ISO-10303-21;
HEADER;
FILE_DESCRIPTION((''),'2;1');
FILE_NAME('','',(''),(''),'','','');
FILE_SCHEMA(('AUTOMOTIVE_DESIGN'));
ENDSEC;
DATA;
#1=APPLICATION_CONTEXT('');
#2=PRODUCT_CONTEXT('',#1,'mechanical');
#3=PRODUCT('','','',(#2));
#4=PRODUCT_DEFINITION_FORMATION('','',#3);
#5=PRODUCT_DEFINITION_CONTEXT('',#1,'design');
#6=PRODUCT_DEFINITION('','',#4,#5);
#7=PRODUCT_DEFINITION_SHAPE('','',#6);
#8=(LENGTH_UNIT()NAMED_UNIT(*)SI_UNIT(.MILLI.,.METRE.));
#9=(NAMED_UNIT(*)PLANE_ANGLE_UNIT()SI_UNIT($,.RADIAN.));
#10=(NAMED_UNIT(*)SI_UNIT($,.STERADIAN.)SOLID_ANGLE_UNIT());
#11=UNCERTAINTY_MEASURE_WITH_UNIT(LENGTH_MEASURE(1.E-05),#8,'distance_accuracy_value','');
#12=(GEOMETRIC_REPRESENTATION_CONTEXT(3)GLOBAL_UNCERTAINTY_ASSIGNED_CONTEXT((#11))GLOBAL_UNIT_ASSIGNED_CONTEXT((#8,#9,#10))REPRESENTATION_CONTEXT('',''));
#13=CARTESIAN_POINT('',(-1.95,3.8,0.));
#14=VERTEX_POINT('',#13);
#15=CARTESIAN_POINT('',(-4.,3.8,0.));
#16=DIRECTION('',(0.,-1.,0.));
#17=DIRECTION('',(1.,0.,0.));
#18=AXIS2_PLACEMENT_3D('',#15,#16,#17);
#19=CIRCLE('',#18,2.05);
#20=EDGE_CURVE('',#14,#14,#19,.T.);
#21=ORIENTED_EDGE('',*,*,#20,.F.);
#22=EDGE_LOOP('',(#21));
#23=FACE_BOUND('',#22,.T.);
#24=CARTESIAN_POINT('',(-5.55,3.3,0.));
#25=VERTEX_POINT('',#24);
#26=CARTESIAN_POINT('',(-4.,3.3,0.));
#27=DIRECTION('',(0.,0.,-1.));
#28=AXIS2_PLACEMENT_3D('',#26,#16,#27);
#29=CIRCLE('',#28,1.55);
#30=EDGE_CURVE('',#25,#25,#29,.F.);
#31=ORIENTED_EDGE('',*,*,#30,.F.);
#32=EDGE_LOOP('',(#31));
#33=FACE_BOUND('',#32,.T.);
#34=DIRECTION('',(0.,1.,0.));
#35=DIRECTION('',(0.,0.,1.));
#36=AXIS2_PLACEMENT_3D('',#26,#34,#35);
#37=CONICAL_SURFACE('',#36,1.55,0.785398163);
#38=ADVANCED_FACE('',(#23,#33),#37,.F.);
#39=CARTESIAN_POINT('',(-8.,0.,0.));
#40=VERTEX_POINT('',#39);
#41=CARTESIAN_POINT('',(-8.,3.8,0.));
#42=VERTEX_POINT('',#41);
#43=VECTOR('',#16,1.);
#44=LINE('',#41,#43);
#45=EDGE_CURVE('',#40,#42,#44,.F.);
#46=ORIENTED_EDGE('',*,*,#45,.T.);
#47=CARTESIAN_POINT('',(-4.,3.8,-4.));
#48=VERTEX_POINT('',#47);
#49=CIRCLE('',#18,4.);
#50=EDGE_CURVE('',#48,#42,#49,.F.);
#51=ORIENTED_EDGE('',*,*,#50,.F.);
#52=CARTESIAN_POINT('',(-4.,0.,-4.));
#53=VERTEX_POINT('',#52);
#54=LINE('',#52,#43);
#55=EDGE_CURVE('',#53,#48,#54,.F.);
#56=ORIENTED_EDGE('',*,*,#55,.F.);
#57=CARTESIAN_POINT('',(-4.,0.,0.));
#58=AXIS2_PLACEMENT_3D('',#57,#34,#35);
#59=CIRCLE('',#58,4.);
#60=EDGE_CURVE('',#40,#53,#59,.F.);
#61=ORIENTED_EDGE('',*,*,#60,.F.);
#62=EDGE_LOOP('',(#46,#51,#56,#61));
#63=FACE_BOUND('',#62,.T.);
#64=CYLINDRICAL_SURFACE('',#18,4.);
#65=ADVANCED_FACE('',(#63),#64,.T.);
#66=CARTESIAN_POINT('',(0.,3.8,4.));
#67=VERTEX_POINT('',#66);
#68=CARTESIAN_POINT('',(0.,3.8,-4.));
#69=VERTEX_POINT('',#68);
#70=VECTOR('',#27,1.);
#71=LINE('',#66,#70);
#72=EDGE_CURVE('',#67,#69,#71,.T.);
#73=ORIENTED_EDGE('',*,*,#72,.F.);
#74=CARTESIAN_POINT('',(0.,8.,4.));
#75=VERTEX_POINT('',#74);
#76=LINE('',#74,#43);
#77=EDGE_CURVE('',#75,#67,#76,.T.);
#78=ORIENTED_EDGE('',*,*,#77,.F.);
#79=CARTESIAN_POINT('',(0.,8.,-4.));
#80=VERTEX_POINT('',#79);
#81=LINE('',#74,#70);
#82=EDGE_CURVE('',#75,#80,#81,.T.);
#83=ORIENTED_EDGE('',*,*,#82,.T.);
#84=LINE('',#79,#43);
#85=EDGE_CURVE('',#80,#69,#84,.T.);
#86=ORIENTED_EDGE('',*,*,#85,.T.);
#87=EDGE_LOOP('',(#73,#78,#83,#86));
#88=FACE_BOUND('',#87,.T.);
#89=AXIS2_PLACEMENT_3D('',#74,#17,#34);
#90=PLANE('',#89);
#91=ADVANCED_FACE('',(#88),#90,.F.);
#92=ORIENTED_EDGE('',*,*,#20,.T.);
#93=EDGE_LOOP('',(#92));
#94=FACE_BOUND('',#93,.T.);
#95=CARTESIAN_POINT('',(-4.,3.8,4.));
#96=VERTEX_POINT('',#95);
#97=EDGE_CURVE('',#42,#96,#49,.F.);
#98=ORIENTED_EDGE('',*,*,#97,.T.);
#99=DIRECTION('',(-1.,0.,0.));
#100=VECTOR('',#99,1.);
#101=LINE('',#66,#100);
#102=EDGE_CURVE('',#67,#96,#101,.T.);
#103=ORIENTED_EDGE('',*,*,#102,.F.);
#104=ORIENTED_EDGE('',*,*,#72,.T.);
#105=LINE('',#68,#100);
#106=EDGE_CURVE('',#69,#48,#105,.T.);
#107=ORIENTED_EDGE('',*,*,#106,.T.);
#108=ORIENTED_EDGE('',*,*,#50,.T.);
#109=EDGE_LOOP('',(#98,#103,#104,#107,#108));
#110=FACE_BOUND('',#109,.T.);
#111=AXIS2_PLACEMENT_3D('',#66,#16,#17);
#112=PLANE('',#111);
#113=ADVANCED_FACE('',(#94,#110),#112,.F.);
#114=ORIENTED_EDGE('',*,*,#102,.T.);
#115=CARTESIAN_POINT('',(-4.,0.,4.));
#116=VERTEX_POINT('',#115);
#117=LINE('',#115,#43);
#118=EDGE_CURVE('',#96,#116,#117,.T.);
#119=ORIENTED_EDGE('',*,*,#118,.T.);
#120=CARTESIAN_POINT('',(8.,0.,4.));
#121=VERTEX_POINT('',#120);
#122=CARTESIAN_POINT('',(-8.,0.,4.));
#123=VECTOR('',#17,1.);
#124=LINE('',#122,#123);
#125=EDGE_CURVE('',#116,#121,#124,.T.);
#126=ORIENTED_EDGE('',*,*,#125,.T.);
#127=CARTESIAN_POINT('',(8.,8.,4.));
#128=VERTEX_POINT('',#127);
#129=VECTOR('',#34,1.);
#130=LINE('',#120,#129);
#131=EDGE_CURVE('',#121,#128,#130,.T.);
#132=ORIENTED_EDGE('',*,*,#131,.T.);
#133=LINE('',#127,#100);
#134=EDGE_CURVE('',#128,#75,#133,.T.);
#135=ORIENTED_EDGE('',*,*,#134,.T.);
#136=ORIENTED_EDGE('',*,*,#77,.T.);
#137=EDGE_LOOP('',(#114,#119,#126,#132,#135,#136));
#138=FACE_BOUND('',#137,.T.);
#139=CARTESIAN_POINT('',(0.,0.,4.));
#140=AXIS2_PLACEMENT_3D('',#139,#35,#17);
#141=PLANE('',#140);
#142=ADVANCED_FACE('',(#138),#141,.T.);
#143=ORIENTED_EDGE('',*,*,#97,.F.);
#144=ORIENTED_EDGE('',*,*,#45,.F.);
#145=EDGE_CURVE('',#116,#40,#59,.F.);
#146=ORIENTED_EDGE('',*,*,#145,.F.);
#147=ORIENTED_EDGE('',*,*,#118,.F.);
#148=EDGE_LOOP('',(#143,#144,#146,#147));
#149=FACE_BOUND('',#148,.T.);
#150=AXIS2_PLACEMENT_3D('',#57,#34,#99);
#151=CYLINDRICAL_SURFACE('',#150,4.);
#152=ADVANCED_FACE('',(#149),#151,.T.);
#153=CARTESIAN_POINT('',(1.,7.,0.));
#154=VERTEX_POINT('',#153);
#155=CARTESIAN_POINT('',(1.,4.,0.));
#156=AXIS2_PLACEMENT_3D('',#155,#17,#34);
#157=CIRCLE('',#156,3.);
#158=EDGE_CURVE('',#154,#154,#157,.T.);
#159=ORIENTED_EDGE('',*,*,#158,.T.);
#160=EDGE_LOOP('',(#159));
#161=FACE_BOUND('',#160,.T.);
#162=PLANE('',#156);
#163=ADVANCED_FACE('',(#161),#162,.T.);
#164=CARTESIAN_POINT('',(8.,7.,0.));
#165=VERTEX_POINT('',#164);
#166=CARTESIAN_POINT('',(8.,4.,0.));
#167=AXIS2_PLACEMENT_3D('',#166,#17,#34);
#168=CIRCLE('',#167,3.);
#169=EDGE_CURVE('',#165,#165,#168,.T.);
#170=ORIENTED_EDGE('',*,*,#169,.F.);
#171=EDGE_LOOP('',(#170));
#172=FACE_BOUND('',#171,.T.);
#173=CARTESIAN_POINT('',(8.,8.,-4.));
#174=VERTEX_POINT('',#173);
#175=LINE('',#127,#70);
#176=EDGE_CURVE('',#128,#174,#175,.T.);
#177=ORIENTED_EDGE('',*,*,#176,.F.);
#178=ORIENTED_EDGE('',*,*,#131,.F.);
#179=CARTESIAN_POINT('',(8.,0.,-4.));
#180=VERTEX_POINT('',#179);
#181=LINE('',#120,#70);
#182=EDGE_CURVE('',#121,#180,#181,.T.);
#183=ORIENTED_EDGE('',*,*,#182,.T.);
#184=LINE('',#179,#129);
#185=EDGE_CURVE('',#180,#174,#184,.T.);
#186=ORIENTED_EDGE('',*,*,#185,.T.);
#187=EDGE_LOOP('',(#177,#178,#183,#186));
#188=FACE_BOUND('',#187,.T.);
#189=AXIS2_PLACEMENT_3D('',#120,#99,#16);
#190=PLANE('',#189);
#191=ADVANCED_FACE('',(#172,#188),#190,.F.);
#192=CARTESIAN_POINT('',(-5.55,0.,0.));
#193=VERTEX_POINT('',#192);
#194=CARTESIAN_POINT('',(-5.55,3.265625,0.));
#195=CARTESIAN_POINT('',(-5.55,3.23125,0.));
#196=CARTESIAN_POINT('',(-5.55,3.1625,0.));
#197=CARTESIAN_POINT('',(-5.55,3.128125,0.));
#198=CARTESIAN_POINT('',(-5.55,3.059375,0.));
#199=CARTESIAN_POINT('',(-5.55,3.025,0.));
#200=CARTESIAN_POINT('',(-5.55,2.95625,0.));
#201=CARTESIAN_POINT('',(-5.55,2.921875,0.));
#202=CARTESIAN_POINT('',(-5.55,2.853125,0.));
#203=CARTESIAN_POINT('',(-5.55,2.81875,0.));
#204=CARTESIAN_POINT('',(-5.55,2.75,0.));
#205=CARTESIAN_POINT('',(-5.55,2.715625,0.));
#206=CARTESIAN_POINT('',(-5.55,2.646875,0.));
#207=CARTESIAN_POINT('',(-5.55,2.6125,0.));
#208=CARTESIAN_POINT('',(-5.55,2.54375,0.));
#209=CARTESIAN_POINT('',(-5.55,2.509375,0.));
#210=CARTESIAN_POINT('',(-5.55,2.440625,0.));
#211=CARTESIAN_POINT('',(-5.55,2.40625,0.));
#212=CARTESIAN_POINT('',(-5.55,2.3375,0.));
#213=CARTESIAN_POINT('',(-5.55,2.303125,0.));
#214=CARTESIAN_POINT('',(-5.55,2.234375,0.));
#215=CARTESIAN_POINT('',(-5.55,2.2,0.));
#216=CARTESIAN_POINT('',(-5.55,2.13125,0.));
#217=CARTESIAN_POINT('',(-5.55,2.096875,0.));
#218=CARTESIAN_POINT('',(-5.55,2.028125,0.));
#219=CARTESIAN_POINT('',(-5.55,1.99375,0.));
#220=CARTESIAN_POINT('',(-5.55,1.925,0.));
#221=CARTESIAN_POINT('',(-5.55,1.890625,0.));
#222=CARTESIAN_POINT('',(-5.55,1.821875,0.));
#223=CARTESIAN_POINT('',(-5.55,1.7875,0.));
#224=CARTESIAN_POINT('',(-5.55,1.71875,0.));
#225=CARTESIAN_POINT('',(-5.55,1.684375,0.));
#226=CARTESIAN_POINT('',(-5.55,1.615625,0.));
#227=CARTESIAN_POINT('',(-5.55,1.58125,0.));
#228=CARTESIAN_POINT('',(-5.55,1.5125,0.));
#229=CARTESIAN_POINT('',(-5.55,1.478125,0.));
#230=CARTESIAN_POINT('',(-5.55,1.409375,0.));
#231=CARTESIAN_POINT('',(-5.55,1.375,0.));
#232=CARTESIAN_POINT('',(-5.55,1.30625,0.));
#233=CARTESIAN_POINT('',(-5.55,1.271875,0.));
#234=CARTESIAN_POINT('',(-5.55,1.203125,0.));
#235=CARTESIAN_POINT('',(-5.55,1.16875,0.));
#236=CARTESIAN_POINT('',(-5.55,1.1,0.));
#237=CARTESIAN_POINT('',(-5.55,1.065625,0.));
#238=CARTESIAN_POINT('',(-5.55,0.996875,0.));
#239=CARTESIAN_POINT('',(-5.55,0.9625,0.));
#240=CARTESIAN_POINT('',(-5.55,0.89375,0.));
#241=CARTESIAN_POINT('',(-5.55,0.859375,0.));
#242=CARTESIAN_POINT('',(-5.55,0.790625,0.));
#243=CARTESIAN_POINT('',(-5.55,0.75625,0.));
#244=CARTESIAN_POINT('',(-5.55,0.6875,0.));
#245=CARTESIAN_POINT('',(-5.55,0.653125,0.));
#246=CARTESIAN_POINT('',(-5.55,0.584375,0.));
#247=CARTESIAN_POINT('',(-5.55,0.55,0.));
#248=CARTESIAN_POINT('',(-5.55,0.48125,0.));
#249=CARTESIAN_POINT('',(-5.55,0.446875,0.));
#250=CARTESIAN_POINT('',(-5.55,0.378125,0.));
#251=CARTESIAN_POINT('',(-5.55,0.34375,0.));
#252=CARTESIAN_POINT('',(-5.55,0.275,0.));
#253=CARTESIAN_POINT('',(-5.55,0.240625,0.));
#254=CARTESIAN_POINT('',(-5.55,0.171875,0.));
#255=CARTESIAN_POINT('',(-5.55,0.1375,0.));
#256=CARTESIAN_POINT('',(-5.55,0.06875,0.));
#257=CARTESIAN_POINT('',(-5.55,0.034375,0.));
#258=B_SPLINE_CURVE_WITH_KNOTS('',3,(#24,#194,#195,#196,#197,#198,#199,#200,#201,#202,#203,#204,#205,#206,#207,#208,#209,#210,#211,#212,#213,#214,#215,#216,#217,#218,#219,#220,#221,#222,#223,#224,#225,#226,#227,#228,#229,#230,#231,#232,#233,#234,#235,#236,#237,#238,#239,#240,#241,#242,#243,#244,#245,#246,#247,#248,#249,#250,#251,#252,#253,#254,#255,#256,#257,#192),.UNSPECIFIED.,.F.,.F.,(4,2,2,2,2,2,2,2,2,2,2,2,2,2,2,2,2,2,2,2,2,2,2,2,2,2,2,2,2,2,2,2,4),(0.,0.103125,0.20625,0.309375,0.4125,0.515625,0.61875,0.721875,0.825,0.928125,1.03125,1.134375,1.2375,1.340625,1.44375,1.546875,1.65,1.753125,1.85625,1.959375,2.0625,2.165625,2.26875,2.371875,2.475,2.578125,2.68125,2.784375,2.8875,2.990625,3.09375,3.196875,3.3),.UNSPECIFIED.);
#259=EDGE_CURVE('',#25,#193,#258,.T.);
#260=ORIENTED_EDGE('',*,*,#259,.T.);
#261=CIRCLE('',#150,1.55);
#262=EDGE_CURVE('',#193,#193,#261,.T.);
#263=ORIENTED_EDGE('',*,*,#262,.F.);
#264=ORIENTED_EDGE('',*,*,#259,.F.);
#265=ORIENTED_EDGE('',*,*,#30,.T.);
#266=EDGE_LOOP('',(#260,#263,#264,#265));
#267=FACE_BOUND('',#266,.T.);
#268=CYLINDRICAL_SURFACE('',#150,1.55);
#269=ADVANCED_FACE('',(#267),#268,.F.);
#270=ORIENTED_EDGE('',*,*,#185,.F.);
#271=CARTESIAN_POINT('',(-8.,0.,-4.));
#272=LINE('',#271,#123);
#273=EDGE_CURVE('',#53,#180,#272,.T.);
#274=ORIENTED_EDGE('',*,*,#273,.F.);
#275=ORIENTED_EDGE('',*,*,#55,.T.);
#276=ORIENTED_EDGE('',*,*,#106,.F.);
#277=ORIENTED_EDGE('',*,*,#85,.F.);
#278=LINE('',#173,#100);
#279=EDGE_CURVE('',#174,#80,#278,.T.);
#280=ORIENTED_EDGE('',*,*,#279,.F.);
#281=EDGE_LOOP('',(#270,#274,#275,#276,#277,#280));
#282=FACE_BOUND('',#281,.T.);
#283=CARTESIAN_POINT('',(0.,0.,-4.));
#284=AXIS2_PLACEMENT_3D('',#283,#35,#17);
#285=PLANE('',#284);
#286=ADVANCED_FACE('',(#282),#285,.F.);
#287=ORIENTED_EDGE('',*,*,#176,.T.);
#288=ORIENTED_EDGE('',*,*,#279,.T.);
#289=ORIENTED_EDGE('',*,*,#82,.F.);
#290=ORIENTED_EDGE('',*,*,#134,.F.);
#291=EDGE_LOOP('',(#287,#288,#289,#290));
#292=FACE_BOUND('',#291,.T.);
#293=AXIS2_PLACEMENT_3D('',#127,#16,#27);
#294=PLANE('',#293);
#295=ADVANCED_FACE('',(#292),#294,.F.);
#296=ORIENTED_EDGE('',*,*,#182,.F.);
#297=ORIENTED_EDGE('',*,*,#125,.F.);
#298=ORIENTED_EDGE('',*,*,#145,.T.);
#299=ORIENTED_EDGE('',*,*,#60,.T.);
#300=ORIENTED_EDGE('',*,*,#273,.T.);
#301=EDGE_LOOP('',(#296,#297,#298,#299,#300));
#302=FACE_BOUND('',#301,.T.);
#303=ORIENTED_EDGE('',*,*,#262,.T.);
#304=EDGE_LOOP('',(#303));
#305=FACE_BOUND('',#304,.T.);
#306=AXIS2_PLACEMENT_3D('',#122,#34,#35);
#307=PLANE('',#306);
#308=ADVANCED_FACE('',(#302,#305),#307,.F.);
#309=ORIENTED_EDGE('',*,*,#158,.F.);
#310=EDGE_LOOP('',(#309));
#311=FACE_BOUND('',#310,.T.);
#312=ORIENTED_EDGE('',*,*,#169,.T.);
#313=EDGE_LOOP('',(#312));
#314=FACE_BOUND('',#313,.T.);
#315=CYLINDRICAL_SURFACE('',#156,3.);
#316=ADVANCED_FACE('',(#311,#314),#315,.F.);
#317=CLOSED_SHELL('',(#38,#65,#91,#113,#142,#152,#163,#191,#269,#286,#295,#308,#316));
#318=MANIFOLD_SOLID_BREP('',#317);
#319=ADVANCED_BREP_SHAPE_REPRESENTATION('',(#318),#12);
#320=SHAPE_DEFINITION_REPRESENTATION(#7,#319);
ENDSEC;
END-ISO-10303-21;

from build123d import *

# Parameters (mm, degrees)
AUFSATZ_LINEAR_AUSTRAGEN1_DEPTH = 4
SKIZZE2_R                       = 3
SCHNITT_LINEAR_AUSTRAGEN1_DEPTH = 7
VERRUNDUNG1_R                   = 4
SKIZZE3_R                       = 1.55
SCHNITT_LINEAR_AUSTRAGEN2_DEPTH = 10.881295462
FASE1_SIZE                      = 0.5


with BuildPart() as part:
    # Skizze1 → Aufsatz-Linear austragen1 (new, symmetric)
    with BuildSketch(Plane.XY):
        Polygon((-8, 0), (8, 0), (8, 8), (0, 8), (0, 3.8), (-8, 3.8), align=None)
    extrude(amount=AUFSATZ_LINEAR_AUSTRAGEN1_DEPTH, both=True)

    # Skizze2 → Schnitt-Linear austragen1 (cut)
    with BuildSketch(Plane(origin=(8, 0, 0), x_dir=(0, 0, -1), z_dir=(1, 0, 0))):
        with Locations(Location((0, 4, 0), (0, 0, 90))):
            Circle(SKIZZE2_R)
    extrude(amount=-SCHNITT_LINEAR_AUSTRAGEN1_DEPTH, mode=Mode.SUBTRACT)

    # Verrundung1
    verrundung1_edges = [part.edges().sort_by_distance(p)[0] for p in [
        (-8, 1.9, -4),
        (-8, 1.9, 4),
    ]]
    fillet(verrundung1_edges, radius=VERRUNDUNG1_R - 0.0001)  # a hair under: the kernel refuses the full size

    # Skizze3 → Schnitt-Linear austragen2 (cut, through all)
    with BuildSketch(Plane(origin=(0, 3.8, 0), x_dir=(1, 0, 0), z_dir=(0, 1, 0))):
        with Locations(Location((-4, 0, 0), (0, 0, 180))):
            Circle(SKIZZE3_R)
    extrude(amount=-SCHNITT_LINEAR_AUSTRAGEN2_DEPTH, mode=Mode.SUBTRACT)

    # Fase1
    fase1_edges = [part.edges().sort_by_distance(p)[0] for p in [
        (-2.45, 3.8, 0),
    ]]
    chamfer(fase1_edges, length=FASE1_SIZE)


solid = part.part
